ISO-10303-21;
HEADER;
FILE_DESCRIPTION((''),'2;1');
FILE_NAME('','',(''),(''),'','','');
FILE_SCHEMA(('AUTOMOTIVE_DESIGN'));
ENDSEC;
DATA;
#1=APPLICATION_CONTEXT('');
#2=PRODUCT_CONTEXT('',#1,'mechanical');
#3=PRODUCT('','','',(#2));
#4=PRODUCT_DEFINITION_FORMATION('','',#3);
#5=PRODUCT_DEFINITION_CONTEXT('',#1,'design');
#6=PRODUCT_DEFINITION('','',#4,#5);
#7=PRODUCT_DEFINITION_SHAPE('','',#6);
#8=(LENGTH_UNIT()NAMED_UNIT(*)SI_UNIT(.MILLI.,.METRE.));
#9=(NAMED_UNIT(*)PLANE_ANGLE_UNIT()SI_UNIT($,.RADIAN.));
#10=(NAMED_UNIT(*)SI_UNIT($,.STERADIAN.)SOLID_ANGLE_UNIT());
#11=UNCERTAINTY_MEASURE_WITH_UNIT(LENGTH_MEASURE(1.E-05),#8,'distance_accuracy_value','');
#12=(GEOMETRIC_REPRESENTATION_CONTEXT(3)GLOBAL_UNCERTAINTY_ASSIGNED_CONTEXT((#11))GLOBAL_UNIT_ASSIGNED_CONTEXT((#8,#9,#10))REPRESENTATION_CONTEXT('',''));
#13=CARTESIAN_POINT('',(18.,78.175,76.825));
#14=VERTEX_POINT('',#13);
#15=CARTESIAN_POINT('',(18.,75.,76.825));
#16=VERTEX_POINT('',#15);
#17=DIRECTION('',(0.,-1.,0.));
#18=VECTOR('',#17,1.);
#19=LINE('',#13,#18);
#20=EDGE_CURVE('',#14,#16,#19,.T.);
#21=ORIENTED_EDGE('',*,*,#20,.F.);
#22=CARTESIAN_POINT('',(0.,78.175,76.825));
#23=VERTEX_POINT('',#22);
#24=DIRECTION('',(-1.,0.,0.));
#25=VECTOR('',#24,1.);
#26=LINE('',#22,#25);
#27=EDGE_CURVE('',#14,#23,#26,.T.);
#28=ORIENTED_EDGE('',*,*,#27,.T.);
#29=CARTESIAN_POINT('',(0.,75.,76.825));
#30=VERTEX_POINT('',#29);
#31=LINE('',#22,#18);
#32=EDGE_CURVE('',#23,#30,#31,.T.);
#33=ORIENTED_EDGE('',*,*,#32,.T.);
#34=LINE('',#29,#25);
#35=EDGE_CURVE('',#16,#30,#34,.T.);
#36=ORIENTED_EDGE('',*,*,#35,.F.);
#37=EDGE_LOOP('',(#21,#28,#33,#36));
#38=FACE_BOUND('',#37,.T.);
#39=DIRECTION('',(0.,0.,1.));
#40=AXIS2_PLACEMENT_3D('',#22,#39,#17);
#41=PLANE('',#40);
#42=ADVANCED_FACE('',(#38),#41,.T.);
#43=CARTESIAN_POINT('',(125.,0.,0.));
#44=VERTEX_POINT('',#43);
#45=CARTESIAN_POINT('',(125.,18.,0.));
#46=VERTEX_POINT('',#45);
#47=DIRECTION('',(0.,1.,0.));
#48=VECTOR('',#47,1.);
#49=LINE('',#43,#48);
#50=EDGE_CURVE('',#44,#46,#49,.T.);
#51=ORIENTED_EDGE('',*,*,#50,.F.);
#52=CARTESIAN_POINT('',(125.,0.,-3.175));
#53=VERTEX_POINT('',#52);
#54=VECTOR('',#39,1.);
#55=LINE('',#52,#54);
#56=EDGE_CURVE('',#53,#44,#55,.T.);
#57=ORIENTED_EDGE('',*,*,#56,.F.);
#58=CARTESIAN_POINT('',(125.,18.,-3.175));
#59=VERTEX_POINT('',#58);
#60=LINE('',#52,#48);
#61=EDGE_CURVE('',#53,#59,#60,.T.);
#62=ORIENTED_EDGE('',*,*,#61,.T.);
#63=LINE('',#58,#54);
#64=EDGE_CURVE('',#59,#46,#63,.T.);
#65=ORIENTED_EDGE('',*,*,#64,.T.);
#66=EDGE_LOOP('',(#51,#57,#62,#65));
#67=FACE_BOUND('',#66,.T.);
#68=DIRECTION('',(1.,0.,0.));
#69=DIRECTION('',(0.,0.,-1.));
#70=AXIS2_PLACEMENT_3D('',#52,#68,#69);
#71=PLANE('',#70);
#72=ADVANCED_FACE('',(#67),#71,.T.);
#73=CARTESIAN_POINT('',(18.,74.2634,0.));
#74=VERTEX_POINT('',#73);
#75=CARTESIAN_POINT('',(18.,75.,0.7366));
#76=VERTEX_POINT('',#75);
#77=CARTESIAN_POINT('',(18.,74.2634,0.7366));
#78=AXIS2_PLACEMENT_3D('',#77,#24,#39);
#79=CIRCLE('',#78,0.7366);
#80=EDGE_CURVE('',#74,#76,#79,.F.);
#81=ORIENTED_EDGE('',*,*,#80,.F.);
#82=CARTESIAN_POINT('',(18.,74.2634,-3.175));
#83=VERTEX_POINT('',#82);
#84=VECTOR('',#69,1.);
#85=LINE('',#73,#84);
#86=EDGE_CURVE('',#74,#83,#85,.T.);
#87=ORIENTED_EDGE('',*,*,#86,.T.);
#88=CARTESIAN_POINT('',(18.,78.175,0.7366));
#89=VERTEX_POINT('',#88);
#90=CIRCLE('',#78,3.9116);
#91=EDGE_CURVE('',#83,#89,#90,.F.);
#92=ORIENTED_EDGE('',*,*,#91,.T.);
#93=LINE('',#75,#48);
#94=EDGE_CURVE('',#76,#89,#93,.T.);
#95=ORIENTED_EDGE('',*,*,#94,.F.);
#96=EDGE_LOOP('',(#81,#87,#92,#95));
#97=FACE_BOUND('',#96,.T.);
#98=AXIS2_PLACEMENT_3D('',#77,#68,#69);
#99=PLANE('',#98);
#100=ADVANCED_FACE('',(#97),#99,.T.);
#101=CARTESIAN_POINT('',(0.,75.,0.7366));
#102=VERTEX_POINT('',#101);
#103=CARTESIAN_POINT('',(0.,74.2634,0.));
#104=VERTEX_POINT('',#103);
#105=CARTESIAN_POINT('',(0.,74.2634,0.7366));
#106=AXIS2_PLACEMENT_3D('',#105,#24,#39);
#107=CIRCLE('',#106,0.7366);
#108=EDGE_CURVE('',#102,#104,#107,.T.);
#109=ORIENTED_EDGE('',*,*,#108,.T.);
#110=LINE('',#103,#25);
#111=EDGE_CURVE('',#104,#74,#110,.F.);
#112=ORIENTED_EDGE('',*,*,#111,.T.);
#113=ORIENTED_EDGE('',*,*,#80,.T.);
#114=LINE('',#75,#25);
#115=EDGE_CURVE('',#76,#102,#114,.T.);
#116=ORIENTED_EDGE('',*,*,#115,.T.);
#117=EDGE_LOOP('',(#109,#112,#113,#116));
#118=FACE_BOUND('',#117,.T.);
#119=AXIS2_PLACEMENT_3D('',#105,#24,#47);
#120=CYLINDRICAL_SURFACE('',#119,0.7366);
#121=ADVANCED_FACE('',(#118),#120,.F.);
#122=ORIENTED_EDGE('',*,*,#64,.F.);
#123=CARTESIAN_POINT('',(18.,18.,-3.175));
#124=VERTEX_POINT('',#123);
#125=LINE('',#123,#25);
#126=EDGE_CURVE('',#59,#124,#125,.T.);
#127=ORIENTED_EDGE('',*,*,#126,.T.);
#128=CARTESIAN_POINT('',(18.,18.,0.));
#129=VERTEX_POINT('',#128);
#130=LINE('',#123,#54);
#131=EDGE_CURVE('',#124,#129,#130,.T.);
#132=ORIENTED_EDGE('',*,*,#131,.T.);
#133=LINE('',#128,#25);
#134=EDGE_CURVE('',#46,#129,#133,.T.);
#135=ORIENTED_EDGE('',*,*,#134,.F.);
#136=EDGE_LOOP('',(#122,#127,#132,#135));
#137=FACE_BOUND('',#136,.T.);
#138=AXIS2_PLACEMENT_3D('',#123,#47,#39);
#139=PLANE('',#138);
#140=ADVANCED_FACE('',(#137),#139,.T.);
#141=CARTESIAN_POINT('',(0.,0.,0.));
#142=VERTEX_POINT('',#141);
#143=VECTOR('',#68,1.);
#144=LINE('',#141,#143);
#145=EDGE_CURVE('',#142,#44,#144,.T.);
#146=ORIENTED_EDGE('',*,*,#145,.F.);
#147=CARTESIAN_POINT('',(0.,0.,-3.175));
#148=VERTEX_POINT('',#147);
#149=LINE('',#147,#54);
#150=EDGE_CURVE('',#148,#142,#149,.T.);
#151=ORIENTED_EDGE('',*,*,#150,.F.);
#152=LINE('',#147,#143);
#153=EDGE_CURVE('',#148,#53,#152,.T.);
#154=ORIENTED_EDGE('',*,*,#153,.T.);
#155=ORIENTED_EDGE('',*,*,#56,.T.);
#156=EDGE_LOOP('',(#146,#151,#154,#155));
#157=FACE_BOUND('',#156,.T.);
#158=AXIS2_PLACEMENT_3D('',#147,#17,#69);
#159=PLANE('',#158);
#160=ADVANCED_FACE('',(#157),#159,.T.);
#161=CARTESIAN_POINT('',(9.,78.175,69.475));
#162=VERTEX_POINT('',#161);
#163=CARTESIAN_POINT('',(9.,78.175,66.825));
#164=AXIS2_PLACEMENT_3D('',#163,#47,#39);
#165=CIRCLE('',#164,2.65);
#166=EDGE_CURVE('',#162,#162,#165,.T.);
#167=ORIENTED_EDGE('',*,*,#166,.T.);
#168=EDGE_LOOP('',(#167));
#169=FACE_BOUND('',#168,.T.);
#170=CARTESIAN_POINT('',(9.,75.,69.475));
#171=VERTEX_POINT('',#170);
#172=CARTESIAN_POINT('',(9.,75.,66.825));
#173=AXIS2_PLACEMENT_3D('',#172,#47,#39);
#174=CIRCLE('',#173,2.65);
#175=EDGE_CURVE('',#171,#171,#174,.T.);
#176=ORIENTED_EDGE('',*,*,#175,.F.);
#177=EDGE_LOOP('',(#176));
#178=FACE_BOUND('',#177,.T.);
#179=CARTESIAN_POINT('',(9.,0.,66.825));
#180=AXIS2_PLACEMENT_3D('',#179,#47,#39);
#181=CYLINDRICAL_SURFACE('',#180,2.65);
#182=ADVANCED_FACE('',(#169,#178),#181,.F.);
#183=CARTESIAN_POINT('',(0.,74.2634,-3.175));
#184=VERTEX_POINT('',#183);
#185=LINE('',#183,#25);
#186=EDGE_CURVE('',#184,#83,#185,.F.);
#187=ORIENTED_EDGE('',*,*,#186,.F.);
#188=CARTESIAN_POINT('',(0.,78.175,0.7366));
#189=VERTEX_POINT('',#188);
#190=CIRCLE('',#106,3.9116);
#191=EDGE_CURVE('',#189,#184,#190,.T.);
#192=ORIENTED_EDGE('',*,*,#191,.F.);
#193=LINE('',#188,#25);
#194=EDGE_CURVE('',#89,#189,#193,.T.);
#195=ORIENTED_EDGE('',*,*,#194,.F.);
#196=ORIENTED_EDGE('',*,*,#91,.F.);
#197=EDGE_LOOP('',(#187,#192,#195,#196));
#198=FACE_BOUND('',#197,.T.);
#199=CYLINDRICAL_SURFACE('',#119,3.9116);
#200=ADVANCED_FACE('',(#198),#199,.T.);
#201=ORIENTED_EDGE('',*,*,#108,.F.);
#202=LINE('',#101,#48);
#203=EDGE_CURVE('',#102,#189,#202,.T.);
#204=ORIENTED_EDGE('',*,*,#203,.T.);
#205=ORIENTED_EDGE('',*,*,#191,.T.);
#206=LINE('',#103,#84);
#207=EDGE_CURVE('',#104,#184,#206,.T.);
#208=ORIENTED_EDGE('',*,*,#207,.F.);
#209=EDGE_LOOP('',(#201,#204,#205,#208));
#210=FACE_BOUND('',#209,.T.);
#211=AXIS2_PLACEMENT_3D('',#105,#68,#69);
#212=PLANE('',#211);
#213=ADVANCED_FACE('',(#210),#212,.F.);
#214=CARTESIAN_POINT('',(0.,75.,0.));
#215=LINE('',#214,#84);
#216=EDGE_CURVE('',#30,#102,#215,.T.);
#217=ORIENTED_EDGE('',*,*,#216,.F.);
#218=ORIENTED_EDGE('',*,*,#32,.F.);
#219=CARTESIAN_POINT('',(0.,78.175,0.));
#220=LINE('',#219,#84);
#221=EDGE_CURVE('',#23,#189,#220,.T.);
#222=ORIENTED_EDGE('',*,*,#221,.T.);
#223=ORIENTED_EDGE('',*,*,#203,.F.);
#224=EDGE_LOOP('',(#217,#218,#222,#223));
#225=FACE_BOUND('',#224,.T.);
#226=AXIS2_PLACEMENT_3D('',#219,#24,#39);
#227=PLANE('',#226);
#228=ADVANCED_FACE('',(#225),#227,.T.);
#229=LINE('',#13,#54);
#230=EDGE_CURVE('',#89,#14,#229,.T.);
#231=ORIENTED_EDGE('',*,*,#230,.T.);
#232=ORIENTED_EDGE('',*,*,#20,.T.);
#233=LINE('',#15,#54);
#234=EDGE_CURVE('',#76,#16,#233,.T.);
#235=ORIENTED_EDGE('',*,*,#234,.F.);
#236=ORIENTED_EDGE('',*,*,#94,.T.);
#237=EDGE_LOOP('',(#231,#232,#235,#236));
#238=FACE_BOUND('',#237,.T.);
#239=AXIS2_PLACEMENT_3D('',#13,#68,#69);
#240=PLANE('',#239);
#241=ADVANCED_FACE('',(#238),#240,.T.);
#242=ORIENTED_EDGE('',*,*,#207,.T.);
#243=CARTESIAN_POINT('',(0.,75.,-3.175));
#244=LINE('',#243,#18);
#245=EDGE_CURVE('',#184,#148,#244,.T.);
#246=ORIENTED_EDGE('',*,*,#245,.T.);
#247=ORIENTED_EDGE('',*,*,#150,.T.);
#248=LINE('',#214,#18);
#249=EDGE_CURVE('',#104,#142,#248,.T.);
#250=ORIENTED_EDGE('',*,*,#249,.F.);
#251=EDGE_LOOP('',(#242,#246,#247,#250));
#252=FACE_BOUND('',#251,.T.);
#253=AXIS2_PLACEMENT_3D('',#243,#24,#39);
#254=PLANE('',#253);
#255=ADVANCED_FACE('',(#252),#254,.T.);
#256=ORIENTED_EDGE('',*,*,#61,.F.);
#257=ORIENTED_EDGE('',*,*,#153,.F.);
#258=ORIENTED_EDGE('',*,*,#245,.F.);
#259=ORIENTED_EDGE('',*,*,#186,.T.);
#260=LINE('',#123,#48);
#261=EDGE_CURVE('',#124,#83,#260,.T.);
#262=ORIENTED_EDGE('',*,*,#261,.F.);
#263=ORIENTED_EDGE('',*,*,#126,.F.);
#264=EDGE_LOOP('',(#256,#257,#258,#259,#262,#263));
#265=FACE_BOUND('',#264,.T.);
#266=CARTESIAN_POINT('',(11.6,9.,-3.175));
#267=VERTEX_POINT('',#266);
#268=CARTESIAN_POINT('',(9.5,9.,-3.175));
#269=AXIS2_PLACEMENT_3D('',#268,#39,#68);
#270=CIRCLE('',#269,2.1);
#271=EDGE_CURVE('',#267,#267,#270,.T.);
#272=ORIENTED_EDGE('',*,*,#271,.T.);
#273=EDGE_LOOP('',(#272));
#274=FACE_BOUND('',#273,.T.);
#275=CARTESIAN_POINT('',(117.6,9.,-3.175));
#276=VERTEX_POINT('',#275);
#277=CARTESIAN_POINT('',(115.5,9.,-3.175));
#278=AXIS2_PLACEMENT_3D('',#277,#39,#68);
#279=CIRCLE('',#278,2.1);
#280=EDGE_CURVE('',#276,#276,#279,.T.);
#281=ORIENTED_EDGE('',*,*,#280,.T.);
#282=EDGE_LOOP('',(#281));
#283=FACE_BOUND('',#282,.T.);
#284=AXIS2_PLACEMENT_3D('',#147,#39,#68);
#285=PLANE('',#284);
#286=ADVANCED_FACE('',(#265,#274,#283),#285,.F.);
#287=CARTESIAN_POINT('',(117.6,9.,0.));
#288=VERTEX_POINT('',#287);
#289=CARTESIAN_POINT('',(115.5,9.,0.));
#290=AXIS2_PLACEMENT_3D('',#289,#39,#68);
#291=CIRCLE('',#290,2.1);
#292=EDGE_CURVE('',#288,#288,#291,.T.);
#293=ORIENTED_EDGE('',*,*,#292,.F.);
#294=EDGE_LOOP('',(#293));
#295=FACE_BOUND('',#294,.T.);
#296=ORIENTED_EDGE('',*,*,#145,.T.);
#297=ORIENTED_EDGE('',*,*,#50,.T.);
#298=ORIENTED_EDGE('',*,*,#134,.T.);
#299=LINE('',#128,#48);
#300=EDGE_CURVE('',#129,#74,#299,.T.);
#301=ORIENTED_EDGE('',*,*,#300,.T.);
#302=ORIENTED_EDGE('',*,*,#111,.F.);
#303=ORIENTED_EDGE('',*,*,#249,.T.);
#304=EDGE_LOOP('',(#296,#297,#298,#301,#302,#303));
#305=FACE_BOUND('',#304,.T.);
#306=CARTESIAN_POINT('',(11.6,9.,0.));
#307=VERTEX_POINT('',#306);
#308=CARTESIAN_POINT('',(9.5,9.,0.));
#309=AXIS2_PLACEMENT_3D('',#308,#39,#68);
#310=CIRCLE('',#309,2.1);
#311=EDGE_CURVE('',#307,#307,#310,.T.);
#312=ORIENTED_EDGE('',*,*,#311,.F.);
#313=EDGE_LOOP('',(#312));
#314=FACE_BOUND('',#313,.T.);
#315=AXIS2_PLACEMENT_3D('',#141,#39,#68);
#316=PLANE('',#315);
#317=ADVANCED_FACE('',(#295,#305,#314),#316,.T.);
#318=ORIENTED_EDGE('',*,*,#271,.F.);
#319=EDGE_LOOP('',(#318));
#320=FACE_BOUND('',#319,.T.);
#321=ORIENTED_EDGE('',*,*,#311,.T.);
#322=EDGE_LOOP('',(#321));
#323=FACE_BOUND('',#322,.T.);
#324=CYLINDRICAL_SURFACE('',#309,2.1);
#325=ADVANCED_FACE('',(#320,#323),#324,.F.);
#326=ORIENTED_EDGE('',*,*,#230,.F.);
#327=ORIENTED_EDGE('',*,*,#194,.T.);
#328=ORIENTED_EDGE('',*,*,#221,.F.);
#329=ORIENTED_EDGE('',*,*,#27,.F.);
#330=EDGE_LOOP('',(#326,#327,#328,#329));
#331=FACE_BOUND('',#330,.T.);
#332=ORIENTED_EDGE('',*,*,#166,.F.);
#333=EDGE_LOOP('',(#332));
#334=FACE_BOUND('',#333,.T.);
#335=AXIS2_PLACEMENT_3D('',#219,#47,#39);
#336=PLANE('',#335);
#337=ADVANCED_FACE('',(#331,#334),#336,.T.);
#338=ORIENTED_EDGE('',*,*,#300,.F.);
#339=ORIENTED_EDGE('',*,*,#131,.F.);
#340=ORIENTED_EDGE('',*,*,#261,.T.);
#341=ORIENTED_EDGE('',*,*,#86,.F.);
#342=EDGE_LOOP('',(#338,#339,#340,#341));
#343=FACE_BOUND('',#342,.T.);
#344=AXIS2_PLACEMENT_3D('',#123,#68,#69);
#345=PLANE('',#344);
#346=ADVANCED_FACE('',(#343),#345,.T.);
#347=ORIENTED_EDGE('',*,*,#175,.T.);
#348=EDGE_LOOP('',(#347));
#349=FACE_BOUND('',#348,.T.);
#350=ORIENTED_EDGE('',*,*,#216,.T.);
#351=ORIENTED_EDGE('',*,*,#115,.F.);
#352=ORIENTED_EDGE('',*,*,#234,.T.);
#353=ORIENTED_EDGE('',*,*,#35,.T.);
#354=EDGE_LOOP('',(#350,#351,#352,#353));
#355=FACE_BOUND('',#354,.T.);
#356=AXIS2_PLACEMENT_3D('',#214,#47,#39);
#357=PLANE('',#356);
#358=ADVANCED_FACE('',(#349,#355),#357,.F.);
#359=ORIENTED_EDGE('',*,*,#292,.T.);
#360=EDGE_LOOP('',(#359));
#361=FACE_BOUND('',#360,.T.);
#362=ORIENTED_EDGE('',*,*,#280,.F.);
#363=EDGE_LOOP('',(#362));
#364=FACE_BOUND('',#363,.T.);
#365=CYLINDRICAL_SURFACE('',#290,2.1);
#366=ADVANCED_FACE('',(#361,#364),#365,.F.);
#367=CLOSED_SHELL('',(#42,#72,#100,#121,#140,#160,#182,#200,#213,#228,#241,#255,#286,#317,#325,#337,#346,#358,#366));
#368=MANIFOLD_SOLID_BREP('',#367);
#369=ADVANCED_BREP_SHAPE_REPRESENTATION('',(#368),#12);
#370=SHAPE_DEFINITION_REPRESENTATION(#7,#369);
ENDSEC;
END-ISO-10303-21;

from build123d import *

# Parameters (mm, degrees)
BASE_FLANGE1_DEPTH           = 3.175
EDGE_FLANGE1_STRIP_W         = 14.1732
EDGE_FLANGE1_STRIP_H         = 3.175
EDGE_FLANGE1_STRIP_CUT_DEPTH = 18
EDGE_FLANGE1_DEPTH           = 18
M5X0_8_TAPPED_HOLE1_D        = 4.2
HOLE2_START                  = 75
HOLE2_OUTLINE_R              = 2.65
HOLE2_DEPTH                  = 3.175


# Read off the part's stored shape, not the designer's step: Hole2
# Sheet-metal steps are written as plain solids
with BuildPart() as part:
    # Sketch1 → Base-Flange1 (new body)
    with BuildSketch(Plane.XY):
        Polygon((0, 75), (0, 0), (125, 0), (125, 18), (18, 18), (18, 75), align=None)
    extrude(amount=-BASE_FLANGE1_DEPTH)

    # Edge-Flange1 strip (across the edge) → Edge-Flange1 strip cut (cut)
    with BuildSketch(Plane(origin=(18, 75, 0), x_dir=(0, -1, 0), z_dir=(-1, 0, 0))):
        with Locations((-6.35, -1.5875)):
            Rectangle(EDGE_FLANGE1_STRIP_W, EDGE_FLANGE1_STRIP_H)
    extrude(amount=EDGE_FLANGE1_STRIP_CUT_DEPTH, mode=Mode.SUBTRACT)

    # Edge-Flange1 section (across the edge) → Edge-Flange1 (add)
    with BuildSketch(Plane(origin=(18, 75, 0), x_dir=(0, -1, 0), z_dir=(-1, 0, 0))):
        with BuildLine():
            Line((-3.175, 0.7366), (-3.175, 76.825))
            Line((-3.175, 76.825), (0, 76.825))
            Line((0, 76.825), (0, 0.7366))
            ThreePointArc((0, 0.7366), (0.215745145, 0.215745145), (0.7366, 0))
            Line((0.7366, 0), (0.7366, -3.175))
            ThreePointArc((0.7366, -3.175), (-2.029318885, -2.029318885), (-3.175, 0.7366))
        make_face()
    extrude(amount=EDGE_FLANGE1_DEPTH)

    # M5x0.8 Tapped Hole1 (through all)
    with Locations(Plane.XY):
        with Locations((9.5, 9), (115.5, 9)):
            Hole(M5X0_8_TAPPED_HOLE1_D / 2)

    # Hole2 outline → Hole2 (cut)
    with BuildSketch(Plane(origin=(0, 0, 0), x_dir=(1, 0, 0), z_dir=(0, 1, 0)).offset(HOLE2_START)):
        with Locations((9, -66.825)):
            Circle(HOLE2_OUTLINE_R)
    extrude(amount=HOLE2_DEPTH, mode=Mode.SUBTRACT)


solid = part.part
